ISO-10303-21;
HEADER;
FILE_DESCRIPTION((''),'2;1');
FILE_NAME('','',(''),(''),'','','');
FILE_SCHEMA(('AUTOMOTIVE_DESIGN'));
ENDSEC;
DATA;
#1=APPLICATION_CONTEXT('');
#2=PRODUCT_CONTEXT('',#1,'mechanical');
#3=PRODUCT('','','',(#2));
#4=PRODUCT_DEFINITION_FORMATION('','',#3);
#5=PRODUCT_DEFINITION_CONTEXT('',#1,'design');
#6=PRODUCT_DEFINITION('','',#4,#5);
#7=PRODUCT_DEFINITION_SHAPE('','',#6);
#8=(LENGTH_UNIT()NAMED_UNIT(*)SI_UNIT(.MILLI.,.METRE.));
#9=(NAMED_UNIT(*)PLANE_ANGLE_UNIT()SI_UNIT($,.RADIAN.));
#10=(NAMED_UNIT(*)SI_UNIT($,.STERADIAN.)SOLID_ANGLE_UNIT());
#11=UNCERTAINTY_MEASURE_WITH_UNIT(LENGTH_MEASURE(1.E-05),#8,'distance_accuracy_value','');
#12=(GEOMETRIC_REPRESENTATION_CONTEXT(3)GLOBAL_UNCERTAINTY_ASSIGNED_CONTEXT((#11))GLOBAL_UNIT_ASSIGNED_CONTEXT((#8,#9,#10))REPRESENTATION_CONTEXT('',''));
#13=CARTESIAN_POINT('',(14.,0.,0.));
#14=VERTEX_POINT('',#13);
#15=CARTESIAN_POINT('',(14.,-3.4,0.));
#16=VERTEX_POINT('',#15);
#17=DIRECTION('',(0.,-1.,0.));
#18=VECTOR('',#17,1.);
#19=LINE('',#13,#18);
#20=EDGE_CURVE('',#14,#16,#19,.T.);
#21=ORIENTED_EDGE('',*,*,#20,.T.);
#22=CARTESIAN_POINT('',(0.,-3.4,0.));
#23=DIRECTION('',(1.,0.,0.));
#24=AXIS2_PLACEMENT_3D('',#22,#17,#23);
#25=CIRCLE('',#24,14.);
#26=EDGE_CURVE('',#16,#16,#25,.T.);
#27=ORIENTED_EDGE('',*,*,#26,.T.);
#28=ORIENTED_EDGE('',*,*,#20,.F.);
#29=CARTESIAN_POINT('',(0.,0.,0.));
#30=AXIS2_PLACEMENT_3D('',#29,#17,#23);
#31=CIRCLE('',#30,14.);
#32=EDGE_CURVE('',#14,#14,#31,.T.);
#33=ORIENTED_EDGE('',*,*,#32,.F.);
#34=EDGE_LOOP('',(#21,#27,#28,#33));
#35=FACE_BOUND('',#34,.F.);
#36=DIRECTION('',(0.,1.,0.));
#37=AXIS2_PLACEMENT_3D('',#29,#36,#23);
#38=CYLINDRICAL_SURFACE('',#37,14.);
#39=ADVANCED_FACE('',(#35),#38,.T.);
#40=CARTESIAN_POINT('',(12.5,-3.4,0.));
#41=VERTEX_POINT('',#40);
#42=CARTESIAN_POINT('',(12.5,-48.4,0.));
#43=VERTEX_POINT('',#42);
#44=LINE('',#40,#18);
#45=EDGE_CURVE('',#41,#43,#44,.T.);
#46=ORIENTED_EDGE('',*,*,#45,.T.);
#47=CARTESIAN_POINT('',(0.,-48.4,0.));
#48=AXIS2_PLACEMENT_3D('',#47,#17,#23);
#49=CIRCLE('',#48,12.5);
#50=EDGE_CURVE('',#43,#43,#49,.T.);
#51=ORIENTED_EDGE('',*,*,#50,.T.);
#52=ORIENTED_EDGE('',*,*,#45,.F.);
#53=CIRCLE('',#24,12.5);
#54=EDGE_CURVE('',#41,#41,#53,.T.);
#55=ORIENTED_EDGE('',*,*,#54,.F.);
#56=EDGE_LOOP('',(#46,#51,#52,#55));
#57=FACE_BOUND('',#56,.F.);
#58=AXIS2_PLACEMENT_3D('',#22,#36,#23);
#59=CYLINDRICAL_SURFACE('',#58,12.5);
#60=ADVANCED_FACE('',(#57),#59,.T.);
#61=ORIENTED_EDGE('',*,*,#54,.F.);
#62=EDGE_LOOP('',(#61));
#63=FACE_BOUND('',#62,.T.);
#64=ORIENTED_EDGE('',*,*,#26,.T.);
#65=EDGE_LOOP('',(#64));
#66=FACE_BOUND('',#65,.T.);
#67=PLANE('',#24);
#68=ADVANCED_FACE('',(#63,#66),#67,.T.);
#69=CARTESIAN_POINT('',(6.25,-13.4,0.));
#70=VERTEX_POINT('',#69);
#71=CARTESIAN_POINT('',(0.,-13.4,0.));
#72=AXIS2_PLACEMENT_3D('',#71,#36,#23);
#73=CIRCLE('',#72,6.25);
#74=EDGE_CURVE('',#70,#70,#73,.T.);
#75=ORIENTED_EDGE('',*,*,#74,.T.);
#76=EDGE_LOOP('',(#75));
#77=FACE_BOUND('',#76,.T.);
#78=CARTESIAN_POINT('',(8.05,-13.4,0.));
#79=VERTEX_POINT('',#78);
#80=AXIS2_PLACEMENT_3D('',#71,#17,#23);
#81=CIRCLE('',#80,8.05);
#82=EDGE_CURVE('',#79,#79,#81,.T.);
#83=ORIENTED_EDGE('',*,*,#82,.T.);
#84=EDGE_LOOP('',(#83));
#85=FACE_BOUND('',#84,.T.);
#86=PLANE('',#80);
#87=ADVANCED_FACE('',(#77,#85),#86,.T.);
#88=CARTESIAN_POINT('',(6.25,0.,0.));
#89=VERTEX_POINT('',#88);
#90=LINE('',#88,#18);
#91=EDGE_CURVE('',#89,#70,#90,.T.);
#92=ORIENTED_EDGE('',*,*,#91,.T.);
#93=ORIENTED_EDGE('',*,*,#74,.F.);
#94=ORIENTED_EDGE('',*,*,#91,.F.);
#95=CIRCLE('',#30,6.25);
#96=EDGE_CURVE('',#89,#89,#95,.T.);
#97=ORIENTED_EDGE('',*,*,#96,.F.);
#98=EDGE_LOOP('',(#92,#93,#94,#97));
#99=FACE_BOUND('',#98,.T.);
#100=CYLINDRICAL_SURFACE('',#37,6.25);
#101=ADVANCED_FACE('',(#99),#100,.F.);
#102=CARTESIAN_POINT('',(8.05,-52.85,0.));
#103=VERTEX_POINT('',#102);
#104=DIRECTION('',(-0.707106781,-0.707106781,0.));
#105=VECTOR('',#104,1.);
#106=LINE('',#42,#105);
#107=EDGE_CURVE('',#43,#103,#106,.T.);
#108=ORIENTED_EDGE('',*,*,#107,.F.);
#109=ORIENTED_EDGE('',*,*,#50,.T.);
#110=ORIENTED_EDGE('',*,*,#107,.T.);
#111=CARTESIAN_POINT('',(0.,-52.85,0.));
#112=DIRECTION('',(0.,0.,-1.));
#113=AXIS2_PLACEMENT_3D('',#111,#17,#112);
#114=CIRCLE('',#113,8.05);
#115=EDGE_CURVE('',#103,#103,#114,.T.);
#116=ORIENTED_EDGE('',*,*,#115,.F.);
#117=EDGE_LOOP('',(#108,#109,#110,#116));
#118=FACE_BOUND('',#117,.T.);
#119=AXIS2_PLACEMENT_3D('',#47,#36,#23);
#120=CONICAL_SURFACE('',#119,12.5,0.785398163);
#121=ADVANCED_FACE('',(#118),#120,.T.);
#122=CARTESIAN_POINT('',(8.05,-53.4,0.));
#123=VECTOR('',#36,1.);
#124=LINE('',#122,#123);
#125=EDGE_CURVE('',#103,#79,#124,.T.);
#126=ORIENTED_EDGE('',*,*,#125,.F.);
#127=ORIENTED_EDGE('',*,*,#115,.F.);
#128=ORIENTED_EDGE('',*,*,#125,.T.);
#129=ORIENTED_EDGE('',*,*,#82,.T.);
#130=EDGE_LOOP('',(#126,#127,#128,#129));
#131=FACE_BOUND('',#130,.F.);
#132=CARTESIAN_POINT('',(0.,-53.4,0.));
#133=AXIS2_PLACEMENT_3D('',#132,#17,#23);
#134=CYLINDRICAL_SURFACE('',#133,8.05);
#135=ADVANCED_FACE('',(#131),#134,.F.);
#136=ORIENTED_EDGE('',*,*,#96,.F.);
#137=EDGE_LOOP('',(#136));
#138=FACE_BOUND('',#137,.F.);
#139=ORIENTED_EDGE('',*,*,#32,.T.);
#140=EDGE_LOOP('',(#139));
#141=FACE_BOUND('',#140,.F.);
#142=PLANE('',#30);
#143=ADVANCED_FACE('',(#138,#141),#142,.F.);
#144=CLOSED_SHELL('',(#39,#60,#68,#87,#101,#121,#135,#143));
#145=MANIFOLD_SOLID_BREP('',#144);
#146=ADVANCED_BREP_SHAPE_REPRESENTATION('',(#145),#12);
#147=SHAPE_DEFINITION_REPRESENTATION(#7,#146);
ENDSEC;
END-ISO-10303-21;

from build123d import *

# Parameters (mm, degrees)
F0_R      = 14
F1_DEPTH  = 3.4
F3_R      = 12.5
F4_DEPTH  = 50
F6_R      = 8.05
F7_DEPTH  = 40
F9_R      = 6.25
F10_DEPTH = 66.1


# Not quite as in the source:
# - a fillet or chamfer that OpenCascade refuses, or shapes differently, is made with other operations: its cross-section is extruded or revolved along the edge and cut away or added


with BuildPart() as f1:
    # F0 (on Front) → F1 (new body)
    with BuildSketch(Plane.XZ):
        Circle(F0_R)
    extrude(amount=F1_DEPTH)

    # F3 (on offset) → F4 (join)
    with BuildSketch(Plane.XZ.offset(3.4)):
        Circle(F3_R)
    extrude(amount=F4_DEPTH)

    # F6 (on offset) → F7 (cut)
    with BuildSketch(Plane.XZ.offset(53.4)):
        Circle(F6_R)
    extrude(amount=-F7_DEPTH, mode=Mode.SUBTRACT)

    # F8: chamfer of 5 on 1 edges, made by hand

    # F8_s1 → F8_t2 (revolve, cut)
    with BuildSketch(Plane.XY):
        Polygon((12.5, -48.4), (7.5, -53.4), (12.5, -53.4), align=None)
    revolve(axis=Axis((0, -53.4, 0), (0, -1, 0)), mode=Mode.SUBTRACT)

    # F9 (on Front) → F10 (cut)
    with BuildSketch(Plane.XZ):
        Circle(F9_R)
    extrude(amount=F10_DEPTH, mode=Mode.SUBTRACT)


solid = f1.part
